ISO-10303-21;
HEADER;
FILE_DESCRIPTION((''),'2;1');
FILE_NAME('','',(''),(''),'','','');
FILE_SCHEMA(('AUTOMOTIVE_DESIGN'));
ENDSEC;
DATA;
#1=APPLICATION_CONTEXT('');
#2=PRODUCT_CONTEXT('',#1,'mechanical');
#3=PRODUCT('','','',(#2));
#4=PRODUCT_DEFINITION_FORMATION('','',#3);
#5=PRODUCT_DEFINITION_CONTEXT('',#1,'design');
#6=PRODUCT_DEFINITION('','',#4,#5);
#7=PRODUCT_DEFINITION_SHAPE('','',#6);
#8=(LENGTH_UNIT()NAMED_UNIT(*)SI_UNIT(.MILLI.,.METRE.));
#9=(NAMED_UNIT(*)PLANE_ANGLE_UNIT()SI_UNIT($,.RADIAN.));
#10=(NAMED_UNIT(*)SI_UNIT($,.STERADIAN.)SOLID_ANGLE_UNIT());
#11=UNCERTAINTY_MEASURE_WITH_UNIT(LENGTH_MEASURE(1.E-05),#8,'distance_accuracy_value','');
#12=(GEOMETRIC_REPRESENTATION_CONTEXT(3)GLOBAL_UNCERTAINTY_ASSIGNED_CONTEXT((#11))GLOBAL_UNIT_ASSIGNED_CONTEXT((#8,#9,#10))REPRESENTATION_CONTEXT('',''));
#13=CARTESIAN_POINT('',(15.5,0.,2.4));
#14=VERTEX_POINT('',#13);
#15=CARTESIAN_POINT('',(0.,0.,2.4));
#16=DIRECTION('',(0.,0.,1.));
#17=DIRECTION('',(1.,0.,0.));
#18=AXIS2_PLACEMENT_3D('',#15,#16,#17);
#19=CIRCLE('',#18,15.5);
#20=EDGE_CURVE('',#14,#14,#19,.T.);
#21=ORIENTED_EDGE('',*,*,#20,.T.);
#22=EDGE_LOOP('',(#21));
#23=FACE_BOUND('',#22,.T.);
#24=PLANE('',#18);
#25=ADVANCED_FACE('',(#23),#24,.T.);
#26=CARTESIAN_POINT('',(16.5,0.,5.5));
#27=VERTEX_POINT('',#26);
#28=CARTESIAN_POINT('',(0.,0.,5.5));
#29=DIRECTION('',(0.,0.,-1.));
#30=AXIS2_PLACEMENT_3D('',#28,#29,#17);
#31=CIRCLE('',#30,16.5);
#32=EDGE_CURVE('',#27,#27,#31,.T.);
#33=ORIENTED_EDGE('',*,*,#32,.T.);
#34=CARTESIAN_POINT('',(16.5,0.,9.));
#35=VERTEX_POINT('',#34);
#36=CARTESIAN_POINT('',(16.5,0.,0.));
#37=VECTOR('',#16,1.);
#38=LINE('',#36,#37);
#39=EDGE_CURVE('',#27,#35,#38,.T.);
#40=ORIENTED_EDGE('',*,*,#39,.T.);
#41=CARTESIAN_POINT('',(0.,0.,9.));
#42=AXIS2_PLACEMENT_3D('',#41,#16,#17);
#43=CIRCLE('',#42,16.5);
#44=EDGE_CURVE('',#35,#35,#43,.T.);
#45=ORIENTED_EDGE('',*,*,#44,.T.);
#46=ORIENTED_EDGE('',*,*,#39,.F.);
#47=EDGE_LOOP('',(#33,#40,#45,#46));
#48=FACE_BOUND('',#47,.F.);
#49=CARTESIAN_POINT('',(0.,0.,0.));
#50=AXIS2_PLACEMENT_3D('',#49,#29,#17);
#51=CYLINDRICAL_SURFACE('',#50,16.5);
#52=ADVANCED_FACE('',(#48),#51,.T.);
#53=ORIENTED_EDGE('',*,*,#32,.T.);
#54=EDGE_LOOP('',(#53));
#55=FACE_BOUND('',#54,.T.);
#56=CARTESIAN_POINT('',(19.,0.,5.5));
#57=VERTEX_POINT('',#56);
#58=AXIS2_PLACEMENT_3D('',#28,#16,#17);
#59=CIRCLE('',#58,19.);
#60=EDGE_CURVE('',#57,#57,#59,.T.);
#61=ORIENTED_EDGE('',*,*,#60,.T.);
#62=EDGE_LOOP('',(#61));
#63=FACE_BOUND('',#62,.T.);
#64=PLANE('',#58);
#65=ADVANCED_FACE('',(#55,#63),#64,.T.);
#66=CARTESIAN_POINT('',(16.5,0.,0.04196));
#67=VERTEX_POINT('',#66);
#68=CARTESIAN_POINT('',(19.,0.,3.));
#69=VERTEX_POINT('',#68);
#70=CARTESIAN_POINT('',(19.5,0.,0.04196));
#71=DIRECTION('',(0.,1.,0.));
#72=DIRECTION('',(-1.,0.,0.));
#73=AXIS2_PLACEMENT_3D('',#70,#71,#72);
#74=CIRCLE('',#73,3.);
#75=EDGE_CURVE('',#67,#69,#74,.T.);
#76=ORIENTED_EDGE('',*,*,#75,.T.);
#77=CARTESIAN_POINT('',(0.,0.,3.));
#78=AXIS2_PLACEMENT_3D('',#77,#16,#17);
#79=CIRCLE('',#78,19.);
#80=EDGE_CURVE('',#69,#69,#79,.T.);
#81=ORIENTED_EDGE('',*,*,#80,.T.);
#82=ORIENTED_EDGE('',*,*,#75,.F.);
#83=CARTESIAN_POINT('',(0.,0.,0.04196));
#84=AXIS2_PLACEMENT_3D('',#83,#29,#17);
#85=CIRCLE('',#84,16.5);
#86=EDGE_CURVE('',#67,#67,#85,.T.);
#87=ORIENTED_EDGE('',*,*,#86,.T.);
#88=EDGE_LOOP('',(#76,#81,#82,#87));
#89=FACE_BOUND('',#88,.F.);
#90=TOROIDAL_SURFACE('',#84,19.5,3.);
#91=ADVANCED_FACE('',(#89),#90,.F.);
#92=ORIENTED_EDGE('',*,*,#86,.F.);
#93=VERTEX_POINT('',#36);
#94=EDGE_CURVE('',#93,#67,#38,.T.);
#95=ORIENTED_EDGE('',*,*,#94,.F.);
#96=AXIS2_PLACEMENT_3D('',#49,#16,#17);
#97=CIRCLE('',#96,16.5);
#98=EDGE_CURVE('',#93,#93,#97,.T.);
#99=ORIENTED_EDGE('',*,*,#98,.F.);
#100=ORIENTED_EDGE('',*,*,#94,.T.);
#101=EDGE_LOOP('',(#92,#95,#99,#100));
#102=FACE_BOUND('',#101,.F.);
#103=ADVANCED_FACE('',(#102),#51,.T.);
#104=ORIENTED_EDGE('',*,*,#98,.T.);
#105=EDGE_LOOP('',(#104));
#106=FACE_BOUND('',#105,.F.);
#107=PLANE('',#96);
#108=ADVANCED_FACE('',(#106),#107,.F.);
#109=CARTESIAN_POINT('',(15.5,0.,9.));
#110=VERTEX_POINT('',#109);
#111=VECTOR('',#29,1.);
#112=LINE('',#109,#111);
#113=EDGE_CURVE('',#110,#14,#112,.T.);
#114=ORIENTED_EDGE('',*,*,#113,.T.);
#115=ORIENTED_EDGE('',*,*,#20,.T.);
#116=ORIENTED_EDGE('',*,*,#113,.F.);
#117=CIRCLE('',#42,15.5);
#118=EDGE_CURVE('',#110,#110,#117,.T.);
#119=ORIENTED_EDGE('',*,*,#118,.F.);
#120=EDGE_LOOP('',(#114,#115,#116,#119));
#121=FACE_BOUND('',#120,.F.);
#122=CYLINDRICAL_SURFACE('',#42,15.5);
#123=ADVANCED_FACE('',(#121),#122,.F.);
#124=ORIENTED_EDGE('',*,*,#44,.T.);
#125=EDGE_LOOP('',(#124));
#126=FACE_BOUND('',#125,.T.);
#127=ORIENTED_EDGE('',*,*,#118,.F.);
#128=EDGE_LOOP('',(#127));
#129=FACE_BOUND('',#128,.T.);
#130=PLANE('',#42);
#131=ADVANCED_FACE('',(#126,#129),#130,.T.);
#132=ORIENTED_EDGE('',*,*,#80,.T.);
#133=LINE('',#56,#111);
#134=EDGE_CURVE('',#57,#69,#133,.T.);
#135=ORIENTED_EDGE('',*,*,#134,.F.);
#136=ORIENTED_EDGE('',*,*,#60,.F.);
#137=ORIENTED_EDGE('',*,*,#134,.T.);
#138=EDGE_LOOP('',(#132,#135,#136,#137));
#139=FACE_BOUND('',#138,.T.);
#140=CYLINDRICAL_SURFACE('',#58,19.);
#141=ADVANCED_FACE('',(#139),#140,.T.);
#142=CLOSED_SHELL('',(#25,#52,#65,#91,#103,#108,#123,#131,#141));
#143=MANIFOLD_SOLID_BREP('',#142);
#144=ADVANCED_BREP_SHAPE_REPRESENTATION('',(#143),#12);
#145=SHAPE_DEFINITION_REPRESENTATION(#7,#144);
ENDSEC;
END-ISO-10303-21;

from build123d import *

# Parameters (mm, degrees)
F0_R     = 16.5
F1_DEPTH = 9
F4_R     = 19
F5_DEPTH = 2.5
F2_R     = 15.5
F6_DEPTH = 6.6


# Not quite as in the source:
# - a fillet or chamfer that OpenCascade refuses, or shapes differently, is made with other operations: its cross-section is extruded or revolved along the edge and cut away or added


with BuildPart() as f1:
    # F0 (on Top) → F1 (new body)
    with BuildSketch(Plane.XY):
        Circle(F0_R)
    extrude(amount=F1_DEPTH)

    # F4 (on offset) → F5 (join)
    with BuildSketch(Plane.XY.offset(5.5)):
        Circle(F4_R)
    extrude(amount=-F5_DEPTH)

    # F2 (on face) → F6 (cut)
    with BuildSketch(Plane.XY.offset(9)):
        Circle(F2_R)
    extrude(amount=-F6_DEPTH, mode=Mode.SUBTRACT)

    # F7: fillet of radius 3 on 1 edges, made by hand

    # F7_s1 → F7_t2 (revolve)
    with BuildSketch(Plane.XZ):
        with BuildLine():
            ThreePointArc((16.5, 0.0419601084), (17.2087121525, 1.9784517816), (19, 3))
            Line((19, 3), (16.5, 3))
            Line((16.5, 3), (16.5, 0.0419601084))
        make_face()
    revolve(axis=Axis((0, 0, 3), (0, 0, -1)))


solid = f1.part
